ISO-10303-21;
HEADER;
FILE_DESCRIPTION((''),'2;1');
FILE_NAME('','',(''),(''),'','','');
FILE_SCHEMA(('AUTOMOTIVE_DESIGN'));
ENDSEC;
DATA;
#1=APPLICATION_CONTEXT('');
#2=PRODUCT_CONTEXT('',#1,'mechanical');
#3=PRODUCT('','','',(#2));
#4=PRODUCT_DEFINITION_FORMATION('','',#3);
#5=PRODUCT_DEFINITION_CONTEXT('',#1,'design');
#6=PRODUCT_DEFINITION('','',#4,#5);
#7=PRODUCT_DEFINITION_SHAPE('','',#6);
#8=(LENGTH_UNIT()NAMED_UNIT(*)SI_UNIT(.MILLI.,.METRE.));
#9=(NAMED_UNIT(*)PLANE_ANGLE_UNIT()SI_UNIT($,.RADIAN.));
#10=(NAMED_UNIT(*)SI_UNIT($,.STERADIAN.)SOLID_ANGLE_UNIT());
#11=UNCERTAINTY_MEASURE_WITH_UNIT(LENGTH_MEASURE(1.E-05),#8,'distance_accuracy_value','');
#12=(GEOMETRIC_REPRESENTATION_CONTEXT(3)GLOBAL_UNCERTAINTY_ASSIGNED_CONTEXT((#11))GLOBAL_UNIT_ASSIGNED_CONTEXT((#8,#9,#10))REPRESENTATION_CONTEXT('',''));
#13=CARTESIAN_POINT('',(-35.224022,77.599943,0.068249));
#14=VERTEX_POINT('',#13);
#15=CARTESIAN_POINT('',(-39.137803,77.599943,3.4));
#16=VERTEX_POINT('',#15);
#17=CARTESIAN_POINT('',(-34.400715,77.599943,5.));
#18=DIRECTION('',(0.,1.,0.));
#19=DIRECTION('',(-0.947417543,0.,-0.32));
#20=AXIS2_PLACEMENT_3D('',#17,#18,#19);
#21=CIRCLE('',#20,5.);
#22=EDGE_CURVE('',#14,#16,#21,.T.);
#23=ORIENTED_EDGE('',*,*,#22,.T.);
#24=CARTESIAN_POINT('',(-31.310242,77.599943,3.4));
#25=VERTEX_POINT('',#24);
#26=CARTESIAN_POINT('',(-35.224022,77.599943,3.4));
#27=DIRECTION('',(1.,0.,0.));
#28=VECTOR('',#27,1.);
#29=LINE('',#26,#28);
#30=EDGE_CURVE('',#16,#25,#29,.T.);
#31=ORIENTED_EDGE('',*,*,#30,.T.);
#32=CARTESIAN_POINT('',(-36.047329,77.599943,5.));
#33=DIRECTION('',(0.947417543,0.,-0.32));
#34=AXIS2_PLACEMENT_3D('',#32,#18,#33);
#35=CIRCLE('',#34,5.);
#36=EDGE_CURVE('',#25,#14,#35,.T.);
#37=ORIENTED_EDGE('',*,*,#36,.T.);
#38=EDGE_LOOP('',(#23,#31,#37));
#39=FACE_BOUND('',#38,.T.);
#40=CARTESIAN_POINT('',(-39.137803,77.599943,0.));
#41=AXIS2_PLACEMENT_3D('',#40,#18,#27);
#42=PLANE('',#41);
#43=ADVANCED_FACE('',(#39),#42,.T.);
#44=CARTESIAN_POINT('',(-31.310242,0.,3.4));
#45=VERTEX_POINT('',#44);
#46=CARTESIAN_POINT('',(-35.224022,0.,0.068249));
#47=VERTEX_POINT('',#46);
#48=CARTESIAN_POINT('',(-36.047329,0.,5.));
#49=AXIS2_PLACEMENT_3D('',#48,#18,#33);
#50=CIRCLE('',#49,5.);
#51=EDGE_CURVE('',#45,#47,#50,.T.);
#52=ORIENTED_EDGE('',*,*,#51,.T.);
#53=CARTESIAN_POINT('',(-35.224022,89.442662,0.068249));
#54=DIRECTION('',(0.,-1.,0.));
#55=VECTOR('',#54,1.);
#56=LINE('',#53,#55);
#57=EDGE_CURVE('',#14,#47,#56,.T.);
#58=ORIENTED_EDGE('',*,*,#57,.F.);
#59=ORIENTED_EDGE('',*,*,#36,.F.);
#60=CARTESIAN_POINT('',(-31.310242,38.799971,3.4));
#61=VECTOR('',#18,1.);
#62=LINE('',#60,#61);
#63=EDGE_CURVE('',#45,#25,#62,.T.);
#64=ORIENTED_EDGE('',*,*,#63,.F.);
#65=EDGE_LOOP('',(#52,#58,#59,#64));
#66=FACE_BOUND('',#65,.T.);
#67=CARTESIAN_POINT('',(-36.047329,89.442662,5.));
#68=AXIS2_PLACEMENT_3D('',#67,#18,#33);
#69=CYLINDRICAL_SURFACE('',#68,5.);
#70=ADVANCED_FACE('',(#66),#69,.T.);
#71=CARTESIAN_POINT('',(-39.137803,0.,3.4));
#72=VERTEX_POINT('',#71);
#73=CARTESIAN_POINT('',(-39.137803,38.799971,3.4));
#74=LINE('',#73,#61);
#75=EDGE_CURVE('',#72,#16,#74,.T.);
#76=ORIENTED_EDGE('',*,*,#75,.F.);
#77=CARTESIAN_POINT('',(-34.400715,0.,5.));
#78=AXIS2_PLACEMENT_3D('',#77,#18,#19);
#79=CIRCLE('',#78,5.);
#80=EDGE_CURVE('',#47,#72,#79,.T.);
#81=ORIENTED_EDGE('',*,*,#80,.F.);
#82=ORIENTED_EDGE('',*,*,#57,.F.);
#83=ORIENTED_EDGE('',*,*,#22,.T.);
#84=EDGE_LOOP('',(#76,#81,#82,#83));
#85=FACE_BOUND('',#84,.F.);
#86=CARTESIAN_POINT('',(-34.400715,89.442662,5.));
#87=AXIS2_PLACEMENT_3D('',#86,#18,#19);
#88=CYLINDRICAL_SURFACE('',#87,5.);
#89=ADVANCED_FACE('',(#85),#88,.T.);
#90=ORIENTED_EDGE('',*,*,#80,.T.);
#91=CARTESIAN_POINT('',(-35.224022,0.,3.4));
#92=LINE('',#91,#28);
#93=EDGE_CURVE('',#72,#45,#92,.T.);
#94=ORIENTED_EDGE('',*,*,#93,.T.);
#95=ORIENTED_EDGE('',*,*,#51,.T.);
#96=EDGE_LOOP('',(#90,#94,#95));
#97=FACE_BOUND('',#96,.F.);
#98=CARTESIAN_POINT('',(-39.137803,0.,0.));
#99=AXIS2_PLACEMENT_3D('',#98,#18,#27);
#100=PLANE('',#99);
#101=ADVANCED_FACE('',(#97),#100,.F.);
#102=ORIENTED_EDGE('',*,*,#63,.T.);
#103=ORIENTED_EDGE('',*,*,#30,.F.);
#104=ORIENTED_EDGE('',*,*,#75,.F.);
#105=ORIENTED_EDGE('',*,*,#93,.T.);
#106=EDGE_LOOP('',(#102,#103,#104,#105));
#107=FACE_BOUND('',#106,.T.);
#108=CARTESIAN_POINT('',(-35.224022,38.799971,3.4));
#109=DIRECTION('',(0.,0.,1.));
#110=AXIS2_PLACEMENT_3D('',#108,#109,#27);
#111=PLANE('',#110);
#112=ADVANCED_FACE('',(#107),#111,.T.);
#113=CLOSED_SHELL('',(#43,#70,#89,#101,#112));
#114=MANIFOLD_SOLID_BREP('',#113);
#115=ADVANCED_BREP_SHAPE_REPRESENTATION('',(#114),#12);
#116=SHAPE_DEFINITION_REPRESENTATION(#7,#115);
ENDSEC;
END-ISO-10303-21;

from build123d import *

# Parameters (mm, degrees)
F0_W        = 7.8275613487
F0_H        = 77.5999426842
F1_DEPTH    = 3.4
F2_T1_DEPTH = 101.2853812488


# Not quite as in the source:
# - a fillet or chamfer that OpenCascade refuses, or shapes differently, is made with other operations: its cross-section is extruded or revolved along the edge and cut away or added


with BuildPart() as f1:
    # F0 (on Top) → F1 (new body)
    with BuildSketch(Plane.XY):
        with Locations((-35.2240223438, 38.7999713421)):
            Rectangle(F0_W, F0_H)
    extrude(amount=F1_DEPTH)

    # F2: fillet of radius 5 on 2 edges, made by hand

    # F2_s2 → F2_t1 (cut)
    with BuildSketch(Plane.XZ.offset(-89.4426619665)):
        with BuildLine():
            ThreePointArc((-31.3102416694, 3.4), (-33.1318534349, 0.9379807977), (-36.0473293823, 0))
            Line((-36.0473293823, 0), (-31.3102416694, 0))
            Line((-31.3102416694, 0), (-31.3102416694, 3.4))
        make_face()
        with BuildLine():
            ThreePointArc((-39.1378030181, 3.4), (-37.3161912526, 0.9379807977), (-34.4007153052, 0))
            Line((-34.4007153052, 0), (-39.1378030181, 0))
            Line((-39.1378030181, 0), (-39.1378030181, 3.4))
        make_face()
    extrude(amount=F2_T1_DEPTH, mode=Mode.SUBTRACT)


solid = f1.part
